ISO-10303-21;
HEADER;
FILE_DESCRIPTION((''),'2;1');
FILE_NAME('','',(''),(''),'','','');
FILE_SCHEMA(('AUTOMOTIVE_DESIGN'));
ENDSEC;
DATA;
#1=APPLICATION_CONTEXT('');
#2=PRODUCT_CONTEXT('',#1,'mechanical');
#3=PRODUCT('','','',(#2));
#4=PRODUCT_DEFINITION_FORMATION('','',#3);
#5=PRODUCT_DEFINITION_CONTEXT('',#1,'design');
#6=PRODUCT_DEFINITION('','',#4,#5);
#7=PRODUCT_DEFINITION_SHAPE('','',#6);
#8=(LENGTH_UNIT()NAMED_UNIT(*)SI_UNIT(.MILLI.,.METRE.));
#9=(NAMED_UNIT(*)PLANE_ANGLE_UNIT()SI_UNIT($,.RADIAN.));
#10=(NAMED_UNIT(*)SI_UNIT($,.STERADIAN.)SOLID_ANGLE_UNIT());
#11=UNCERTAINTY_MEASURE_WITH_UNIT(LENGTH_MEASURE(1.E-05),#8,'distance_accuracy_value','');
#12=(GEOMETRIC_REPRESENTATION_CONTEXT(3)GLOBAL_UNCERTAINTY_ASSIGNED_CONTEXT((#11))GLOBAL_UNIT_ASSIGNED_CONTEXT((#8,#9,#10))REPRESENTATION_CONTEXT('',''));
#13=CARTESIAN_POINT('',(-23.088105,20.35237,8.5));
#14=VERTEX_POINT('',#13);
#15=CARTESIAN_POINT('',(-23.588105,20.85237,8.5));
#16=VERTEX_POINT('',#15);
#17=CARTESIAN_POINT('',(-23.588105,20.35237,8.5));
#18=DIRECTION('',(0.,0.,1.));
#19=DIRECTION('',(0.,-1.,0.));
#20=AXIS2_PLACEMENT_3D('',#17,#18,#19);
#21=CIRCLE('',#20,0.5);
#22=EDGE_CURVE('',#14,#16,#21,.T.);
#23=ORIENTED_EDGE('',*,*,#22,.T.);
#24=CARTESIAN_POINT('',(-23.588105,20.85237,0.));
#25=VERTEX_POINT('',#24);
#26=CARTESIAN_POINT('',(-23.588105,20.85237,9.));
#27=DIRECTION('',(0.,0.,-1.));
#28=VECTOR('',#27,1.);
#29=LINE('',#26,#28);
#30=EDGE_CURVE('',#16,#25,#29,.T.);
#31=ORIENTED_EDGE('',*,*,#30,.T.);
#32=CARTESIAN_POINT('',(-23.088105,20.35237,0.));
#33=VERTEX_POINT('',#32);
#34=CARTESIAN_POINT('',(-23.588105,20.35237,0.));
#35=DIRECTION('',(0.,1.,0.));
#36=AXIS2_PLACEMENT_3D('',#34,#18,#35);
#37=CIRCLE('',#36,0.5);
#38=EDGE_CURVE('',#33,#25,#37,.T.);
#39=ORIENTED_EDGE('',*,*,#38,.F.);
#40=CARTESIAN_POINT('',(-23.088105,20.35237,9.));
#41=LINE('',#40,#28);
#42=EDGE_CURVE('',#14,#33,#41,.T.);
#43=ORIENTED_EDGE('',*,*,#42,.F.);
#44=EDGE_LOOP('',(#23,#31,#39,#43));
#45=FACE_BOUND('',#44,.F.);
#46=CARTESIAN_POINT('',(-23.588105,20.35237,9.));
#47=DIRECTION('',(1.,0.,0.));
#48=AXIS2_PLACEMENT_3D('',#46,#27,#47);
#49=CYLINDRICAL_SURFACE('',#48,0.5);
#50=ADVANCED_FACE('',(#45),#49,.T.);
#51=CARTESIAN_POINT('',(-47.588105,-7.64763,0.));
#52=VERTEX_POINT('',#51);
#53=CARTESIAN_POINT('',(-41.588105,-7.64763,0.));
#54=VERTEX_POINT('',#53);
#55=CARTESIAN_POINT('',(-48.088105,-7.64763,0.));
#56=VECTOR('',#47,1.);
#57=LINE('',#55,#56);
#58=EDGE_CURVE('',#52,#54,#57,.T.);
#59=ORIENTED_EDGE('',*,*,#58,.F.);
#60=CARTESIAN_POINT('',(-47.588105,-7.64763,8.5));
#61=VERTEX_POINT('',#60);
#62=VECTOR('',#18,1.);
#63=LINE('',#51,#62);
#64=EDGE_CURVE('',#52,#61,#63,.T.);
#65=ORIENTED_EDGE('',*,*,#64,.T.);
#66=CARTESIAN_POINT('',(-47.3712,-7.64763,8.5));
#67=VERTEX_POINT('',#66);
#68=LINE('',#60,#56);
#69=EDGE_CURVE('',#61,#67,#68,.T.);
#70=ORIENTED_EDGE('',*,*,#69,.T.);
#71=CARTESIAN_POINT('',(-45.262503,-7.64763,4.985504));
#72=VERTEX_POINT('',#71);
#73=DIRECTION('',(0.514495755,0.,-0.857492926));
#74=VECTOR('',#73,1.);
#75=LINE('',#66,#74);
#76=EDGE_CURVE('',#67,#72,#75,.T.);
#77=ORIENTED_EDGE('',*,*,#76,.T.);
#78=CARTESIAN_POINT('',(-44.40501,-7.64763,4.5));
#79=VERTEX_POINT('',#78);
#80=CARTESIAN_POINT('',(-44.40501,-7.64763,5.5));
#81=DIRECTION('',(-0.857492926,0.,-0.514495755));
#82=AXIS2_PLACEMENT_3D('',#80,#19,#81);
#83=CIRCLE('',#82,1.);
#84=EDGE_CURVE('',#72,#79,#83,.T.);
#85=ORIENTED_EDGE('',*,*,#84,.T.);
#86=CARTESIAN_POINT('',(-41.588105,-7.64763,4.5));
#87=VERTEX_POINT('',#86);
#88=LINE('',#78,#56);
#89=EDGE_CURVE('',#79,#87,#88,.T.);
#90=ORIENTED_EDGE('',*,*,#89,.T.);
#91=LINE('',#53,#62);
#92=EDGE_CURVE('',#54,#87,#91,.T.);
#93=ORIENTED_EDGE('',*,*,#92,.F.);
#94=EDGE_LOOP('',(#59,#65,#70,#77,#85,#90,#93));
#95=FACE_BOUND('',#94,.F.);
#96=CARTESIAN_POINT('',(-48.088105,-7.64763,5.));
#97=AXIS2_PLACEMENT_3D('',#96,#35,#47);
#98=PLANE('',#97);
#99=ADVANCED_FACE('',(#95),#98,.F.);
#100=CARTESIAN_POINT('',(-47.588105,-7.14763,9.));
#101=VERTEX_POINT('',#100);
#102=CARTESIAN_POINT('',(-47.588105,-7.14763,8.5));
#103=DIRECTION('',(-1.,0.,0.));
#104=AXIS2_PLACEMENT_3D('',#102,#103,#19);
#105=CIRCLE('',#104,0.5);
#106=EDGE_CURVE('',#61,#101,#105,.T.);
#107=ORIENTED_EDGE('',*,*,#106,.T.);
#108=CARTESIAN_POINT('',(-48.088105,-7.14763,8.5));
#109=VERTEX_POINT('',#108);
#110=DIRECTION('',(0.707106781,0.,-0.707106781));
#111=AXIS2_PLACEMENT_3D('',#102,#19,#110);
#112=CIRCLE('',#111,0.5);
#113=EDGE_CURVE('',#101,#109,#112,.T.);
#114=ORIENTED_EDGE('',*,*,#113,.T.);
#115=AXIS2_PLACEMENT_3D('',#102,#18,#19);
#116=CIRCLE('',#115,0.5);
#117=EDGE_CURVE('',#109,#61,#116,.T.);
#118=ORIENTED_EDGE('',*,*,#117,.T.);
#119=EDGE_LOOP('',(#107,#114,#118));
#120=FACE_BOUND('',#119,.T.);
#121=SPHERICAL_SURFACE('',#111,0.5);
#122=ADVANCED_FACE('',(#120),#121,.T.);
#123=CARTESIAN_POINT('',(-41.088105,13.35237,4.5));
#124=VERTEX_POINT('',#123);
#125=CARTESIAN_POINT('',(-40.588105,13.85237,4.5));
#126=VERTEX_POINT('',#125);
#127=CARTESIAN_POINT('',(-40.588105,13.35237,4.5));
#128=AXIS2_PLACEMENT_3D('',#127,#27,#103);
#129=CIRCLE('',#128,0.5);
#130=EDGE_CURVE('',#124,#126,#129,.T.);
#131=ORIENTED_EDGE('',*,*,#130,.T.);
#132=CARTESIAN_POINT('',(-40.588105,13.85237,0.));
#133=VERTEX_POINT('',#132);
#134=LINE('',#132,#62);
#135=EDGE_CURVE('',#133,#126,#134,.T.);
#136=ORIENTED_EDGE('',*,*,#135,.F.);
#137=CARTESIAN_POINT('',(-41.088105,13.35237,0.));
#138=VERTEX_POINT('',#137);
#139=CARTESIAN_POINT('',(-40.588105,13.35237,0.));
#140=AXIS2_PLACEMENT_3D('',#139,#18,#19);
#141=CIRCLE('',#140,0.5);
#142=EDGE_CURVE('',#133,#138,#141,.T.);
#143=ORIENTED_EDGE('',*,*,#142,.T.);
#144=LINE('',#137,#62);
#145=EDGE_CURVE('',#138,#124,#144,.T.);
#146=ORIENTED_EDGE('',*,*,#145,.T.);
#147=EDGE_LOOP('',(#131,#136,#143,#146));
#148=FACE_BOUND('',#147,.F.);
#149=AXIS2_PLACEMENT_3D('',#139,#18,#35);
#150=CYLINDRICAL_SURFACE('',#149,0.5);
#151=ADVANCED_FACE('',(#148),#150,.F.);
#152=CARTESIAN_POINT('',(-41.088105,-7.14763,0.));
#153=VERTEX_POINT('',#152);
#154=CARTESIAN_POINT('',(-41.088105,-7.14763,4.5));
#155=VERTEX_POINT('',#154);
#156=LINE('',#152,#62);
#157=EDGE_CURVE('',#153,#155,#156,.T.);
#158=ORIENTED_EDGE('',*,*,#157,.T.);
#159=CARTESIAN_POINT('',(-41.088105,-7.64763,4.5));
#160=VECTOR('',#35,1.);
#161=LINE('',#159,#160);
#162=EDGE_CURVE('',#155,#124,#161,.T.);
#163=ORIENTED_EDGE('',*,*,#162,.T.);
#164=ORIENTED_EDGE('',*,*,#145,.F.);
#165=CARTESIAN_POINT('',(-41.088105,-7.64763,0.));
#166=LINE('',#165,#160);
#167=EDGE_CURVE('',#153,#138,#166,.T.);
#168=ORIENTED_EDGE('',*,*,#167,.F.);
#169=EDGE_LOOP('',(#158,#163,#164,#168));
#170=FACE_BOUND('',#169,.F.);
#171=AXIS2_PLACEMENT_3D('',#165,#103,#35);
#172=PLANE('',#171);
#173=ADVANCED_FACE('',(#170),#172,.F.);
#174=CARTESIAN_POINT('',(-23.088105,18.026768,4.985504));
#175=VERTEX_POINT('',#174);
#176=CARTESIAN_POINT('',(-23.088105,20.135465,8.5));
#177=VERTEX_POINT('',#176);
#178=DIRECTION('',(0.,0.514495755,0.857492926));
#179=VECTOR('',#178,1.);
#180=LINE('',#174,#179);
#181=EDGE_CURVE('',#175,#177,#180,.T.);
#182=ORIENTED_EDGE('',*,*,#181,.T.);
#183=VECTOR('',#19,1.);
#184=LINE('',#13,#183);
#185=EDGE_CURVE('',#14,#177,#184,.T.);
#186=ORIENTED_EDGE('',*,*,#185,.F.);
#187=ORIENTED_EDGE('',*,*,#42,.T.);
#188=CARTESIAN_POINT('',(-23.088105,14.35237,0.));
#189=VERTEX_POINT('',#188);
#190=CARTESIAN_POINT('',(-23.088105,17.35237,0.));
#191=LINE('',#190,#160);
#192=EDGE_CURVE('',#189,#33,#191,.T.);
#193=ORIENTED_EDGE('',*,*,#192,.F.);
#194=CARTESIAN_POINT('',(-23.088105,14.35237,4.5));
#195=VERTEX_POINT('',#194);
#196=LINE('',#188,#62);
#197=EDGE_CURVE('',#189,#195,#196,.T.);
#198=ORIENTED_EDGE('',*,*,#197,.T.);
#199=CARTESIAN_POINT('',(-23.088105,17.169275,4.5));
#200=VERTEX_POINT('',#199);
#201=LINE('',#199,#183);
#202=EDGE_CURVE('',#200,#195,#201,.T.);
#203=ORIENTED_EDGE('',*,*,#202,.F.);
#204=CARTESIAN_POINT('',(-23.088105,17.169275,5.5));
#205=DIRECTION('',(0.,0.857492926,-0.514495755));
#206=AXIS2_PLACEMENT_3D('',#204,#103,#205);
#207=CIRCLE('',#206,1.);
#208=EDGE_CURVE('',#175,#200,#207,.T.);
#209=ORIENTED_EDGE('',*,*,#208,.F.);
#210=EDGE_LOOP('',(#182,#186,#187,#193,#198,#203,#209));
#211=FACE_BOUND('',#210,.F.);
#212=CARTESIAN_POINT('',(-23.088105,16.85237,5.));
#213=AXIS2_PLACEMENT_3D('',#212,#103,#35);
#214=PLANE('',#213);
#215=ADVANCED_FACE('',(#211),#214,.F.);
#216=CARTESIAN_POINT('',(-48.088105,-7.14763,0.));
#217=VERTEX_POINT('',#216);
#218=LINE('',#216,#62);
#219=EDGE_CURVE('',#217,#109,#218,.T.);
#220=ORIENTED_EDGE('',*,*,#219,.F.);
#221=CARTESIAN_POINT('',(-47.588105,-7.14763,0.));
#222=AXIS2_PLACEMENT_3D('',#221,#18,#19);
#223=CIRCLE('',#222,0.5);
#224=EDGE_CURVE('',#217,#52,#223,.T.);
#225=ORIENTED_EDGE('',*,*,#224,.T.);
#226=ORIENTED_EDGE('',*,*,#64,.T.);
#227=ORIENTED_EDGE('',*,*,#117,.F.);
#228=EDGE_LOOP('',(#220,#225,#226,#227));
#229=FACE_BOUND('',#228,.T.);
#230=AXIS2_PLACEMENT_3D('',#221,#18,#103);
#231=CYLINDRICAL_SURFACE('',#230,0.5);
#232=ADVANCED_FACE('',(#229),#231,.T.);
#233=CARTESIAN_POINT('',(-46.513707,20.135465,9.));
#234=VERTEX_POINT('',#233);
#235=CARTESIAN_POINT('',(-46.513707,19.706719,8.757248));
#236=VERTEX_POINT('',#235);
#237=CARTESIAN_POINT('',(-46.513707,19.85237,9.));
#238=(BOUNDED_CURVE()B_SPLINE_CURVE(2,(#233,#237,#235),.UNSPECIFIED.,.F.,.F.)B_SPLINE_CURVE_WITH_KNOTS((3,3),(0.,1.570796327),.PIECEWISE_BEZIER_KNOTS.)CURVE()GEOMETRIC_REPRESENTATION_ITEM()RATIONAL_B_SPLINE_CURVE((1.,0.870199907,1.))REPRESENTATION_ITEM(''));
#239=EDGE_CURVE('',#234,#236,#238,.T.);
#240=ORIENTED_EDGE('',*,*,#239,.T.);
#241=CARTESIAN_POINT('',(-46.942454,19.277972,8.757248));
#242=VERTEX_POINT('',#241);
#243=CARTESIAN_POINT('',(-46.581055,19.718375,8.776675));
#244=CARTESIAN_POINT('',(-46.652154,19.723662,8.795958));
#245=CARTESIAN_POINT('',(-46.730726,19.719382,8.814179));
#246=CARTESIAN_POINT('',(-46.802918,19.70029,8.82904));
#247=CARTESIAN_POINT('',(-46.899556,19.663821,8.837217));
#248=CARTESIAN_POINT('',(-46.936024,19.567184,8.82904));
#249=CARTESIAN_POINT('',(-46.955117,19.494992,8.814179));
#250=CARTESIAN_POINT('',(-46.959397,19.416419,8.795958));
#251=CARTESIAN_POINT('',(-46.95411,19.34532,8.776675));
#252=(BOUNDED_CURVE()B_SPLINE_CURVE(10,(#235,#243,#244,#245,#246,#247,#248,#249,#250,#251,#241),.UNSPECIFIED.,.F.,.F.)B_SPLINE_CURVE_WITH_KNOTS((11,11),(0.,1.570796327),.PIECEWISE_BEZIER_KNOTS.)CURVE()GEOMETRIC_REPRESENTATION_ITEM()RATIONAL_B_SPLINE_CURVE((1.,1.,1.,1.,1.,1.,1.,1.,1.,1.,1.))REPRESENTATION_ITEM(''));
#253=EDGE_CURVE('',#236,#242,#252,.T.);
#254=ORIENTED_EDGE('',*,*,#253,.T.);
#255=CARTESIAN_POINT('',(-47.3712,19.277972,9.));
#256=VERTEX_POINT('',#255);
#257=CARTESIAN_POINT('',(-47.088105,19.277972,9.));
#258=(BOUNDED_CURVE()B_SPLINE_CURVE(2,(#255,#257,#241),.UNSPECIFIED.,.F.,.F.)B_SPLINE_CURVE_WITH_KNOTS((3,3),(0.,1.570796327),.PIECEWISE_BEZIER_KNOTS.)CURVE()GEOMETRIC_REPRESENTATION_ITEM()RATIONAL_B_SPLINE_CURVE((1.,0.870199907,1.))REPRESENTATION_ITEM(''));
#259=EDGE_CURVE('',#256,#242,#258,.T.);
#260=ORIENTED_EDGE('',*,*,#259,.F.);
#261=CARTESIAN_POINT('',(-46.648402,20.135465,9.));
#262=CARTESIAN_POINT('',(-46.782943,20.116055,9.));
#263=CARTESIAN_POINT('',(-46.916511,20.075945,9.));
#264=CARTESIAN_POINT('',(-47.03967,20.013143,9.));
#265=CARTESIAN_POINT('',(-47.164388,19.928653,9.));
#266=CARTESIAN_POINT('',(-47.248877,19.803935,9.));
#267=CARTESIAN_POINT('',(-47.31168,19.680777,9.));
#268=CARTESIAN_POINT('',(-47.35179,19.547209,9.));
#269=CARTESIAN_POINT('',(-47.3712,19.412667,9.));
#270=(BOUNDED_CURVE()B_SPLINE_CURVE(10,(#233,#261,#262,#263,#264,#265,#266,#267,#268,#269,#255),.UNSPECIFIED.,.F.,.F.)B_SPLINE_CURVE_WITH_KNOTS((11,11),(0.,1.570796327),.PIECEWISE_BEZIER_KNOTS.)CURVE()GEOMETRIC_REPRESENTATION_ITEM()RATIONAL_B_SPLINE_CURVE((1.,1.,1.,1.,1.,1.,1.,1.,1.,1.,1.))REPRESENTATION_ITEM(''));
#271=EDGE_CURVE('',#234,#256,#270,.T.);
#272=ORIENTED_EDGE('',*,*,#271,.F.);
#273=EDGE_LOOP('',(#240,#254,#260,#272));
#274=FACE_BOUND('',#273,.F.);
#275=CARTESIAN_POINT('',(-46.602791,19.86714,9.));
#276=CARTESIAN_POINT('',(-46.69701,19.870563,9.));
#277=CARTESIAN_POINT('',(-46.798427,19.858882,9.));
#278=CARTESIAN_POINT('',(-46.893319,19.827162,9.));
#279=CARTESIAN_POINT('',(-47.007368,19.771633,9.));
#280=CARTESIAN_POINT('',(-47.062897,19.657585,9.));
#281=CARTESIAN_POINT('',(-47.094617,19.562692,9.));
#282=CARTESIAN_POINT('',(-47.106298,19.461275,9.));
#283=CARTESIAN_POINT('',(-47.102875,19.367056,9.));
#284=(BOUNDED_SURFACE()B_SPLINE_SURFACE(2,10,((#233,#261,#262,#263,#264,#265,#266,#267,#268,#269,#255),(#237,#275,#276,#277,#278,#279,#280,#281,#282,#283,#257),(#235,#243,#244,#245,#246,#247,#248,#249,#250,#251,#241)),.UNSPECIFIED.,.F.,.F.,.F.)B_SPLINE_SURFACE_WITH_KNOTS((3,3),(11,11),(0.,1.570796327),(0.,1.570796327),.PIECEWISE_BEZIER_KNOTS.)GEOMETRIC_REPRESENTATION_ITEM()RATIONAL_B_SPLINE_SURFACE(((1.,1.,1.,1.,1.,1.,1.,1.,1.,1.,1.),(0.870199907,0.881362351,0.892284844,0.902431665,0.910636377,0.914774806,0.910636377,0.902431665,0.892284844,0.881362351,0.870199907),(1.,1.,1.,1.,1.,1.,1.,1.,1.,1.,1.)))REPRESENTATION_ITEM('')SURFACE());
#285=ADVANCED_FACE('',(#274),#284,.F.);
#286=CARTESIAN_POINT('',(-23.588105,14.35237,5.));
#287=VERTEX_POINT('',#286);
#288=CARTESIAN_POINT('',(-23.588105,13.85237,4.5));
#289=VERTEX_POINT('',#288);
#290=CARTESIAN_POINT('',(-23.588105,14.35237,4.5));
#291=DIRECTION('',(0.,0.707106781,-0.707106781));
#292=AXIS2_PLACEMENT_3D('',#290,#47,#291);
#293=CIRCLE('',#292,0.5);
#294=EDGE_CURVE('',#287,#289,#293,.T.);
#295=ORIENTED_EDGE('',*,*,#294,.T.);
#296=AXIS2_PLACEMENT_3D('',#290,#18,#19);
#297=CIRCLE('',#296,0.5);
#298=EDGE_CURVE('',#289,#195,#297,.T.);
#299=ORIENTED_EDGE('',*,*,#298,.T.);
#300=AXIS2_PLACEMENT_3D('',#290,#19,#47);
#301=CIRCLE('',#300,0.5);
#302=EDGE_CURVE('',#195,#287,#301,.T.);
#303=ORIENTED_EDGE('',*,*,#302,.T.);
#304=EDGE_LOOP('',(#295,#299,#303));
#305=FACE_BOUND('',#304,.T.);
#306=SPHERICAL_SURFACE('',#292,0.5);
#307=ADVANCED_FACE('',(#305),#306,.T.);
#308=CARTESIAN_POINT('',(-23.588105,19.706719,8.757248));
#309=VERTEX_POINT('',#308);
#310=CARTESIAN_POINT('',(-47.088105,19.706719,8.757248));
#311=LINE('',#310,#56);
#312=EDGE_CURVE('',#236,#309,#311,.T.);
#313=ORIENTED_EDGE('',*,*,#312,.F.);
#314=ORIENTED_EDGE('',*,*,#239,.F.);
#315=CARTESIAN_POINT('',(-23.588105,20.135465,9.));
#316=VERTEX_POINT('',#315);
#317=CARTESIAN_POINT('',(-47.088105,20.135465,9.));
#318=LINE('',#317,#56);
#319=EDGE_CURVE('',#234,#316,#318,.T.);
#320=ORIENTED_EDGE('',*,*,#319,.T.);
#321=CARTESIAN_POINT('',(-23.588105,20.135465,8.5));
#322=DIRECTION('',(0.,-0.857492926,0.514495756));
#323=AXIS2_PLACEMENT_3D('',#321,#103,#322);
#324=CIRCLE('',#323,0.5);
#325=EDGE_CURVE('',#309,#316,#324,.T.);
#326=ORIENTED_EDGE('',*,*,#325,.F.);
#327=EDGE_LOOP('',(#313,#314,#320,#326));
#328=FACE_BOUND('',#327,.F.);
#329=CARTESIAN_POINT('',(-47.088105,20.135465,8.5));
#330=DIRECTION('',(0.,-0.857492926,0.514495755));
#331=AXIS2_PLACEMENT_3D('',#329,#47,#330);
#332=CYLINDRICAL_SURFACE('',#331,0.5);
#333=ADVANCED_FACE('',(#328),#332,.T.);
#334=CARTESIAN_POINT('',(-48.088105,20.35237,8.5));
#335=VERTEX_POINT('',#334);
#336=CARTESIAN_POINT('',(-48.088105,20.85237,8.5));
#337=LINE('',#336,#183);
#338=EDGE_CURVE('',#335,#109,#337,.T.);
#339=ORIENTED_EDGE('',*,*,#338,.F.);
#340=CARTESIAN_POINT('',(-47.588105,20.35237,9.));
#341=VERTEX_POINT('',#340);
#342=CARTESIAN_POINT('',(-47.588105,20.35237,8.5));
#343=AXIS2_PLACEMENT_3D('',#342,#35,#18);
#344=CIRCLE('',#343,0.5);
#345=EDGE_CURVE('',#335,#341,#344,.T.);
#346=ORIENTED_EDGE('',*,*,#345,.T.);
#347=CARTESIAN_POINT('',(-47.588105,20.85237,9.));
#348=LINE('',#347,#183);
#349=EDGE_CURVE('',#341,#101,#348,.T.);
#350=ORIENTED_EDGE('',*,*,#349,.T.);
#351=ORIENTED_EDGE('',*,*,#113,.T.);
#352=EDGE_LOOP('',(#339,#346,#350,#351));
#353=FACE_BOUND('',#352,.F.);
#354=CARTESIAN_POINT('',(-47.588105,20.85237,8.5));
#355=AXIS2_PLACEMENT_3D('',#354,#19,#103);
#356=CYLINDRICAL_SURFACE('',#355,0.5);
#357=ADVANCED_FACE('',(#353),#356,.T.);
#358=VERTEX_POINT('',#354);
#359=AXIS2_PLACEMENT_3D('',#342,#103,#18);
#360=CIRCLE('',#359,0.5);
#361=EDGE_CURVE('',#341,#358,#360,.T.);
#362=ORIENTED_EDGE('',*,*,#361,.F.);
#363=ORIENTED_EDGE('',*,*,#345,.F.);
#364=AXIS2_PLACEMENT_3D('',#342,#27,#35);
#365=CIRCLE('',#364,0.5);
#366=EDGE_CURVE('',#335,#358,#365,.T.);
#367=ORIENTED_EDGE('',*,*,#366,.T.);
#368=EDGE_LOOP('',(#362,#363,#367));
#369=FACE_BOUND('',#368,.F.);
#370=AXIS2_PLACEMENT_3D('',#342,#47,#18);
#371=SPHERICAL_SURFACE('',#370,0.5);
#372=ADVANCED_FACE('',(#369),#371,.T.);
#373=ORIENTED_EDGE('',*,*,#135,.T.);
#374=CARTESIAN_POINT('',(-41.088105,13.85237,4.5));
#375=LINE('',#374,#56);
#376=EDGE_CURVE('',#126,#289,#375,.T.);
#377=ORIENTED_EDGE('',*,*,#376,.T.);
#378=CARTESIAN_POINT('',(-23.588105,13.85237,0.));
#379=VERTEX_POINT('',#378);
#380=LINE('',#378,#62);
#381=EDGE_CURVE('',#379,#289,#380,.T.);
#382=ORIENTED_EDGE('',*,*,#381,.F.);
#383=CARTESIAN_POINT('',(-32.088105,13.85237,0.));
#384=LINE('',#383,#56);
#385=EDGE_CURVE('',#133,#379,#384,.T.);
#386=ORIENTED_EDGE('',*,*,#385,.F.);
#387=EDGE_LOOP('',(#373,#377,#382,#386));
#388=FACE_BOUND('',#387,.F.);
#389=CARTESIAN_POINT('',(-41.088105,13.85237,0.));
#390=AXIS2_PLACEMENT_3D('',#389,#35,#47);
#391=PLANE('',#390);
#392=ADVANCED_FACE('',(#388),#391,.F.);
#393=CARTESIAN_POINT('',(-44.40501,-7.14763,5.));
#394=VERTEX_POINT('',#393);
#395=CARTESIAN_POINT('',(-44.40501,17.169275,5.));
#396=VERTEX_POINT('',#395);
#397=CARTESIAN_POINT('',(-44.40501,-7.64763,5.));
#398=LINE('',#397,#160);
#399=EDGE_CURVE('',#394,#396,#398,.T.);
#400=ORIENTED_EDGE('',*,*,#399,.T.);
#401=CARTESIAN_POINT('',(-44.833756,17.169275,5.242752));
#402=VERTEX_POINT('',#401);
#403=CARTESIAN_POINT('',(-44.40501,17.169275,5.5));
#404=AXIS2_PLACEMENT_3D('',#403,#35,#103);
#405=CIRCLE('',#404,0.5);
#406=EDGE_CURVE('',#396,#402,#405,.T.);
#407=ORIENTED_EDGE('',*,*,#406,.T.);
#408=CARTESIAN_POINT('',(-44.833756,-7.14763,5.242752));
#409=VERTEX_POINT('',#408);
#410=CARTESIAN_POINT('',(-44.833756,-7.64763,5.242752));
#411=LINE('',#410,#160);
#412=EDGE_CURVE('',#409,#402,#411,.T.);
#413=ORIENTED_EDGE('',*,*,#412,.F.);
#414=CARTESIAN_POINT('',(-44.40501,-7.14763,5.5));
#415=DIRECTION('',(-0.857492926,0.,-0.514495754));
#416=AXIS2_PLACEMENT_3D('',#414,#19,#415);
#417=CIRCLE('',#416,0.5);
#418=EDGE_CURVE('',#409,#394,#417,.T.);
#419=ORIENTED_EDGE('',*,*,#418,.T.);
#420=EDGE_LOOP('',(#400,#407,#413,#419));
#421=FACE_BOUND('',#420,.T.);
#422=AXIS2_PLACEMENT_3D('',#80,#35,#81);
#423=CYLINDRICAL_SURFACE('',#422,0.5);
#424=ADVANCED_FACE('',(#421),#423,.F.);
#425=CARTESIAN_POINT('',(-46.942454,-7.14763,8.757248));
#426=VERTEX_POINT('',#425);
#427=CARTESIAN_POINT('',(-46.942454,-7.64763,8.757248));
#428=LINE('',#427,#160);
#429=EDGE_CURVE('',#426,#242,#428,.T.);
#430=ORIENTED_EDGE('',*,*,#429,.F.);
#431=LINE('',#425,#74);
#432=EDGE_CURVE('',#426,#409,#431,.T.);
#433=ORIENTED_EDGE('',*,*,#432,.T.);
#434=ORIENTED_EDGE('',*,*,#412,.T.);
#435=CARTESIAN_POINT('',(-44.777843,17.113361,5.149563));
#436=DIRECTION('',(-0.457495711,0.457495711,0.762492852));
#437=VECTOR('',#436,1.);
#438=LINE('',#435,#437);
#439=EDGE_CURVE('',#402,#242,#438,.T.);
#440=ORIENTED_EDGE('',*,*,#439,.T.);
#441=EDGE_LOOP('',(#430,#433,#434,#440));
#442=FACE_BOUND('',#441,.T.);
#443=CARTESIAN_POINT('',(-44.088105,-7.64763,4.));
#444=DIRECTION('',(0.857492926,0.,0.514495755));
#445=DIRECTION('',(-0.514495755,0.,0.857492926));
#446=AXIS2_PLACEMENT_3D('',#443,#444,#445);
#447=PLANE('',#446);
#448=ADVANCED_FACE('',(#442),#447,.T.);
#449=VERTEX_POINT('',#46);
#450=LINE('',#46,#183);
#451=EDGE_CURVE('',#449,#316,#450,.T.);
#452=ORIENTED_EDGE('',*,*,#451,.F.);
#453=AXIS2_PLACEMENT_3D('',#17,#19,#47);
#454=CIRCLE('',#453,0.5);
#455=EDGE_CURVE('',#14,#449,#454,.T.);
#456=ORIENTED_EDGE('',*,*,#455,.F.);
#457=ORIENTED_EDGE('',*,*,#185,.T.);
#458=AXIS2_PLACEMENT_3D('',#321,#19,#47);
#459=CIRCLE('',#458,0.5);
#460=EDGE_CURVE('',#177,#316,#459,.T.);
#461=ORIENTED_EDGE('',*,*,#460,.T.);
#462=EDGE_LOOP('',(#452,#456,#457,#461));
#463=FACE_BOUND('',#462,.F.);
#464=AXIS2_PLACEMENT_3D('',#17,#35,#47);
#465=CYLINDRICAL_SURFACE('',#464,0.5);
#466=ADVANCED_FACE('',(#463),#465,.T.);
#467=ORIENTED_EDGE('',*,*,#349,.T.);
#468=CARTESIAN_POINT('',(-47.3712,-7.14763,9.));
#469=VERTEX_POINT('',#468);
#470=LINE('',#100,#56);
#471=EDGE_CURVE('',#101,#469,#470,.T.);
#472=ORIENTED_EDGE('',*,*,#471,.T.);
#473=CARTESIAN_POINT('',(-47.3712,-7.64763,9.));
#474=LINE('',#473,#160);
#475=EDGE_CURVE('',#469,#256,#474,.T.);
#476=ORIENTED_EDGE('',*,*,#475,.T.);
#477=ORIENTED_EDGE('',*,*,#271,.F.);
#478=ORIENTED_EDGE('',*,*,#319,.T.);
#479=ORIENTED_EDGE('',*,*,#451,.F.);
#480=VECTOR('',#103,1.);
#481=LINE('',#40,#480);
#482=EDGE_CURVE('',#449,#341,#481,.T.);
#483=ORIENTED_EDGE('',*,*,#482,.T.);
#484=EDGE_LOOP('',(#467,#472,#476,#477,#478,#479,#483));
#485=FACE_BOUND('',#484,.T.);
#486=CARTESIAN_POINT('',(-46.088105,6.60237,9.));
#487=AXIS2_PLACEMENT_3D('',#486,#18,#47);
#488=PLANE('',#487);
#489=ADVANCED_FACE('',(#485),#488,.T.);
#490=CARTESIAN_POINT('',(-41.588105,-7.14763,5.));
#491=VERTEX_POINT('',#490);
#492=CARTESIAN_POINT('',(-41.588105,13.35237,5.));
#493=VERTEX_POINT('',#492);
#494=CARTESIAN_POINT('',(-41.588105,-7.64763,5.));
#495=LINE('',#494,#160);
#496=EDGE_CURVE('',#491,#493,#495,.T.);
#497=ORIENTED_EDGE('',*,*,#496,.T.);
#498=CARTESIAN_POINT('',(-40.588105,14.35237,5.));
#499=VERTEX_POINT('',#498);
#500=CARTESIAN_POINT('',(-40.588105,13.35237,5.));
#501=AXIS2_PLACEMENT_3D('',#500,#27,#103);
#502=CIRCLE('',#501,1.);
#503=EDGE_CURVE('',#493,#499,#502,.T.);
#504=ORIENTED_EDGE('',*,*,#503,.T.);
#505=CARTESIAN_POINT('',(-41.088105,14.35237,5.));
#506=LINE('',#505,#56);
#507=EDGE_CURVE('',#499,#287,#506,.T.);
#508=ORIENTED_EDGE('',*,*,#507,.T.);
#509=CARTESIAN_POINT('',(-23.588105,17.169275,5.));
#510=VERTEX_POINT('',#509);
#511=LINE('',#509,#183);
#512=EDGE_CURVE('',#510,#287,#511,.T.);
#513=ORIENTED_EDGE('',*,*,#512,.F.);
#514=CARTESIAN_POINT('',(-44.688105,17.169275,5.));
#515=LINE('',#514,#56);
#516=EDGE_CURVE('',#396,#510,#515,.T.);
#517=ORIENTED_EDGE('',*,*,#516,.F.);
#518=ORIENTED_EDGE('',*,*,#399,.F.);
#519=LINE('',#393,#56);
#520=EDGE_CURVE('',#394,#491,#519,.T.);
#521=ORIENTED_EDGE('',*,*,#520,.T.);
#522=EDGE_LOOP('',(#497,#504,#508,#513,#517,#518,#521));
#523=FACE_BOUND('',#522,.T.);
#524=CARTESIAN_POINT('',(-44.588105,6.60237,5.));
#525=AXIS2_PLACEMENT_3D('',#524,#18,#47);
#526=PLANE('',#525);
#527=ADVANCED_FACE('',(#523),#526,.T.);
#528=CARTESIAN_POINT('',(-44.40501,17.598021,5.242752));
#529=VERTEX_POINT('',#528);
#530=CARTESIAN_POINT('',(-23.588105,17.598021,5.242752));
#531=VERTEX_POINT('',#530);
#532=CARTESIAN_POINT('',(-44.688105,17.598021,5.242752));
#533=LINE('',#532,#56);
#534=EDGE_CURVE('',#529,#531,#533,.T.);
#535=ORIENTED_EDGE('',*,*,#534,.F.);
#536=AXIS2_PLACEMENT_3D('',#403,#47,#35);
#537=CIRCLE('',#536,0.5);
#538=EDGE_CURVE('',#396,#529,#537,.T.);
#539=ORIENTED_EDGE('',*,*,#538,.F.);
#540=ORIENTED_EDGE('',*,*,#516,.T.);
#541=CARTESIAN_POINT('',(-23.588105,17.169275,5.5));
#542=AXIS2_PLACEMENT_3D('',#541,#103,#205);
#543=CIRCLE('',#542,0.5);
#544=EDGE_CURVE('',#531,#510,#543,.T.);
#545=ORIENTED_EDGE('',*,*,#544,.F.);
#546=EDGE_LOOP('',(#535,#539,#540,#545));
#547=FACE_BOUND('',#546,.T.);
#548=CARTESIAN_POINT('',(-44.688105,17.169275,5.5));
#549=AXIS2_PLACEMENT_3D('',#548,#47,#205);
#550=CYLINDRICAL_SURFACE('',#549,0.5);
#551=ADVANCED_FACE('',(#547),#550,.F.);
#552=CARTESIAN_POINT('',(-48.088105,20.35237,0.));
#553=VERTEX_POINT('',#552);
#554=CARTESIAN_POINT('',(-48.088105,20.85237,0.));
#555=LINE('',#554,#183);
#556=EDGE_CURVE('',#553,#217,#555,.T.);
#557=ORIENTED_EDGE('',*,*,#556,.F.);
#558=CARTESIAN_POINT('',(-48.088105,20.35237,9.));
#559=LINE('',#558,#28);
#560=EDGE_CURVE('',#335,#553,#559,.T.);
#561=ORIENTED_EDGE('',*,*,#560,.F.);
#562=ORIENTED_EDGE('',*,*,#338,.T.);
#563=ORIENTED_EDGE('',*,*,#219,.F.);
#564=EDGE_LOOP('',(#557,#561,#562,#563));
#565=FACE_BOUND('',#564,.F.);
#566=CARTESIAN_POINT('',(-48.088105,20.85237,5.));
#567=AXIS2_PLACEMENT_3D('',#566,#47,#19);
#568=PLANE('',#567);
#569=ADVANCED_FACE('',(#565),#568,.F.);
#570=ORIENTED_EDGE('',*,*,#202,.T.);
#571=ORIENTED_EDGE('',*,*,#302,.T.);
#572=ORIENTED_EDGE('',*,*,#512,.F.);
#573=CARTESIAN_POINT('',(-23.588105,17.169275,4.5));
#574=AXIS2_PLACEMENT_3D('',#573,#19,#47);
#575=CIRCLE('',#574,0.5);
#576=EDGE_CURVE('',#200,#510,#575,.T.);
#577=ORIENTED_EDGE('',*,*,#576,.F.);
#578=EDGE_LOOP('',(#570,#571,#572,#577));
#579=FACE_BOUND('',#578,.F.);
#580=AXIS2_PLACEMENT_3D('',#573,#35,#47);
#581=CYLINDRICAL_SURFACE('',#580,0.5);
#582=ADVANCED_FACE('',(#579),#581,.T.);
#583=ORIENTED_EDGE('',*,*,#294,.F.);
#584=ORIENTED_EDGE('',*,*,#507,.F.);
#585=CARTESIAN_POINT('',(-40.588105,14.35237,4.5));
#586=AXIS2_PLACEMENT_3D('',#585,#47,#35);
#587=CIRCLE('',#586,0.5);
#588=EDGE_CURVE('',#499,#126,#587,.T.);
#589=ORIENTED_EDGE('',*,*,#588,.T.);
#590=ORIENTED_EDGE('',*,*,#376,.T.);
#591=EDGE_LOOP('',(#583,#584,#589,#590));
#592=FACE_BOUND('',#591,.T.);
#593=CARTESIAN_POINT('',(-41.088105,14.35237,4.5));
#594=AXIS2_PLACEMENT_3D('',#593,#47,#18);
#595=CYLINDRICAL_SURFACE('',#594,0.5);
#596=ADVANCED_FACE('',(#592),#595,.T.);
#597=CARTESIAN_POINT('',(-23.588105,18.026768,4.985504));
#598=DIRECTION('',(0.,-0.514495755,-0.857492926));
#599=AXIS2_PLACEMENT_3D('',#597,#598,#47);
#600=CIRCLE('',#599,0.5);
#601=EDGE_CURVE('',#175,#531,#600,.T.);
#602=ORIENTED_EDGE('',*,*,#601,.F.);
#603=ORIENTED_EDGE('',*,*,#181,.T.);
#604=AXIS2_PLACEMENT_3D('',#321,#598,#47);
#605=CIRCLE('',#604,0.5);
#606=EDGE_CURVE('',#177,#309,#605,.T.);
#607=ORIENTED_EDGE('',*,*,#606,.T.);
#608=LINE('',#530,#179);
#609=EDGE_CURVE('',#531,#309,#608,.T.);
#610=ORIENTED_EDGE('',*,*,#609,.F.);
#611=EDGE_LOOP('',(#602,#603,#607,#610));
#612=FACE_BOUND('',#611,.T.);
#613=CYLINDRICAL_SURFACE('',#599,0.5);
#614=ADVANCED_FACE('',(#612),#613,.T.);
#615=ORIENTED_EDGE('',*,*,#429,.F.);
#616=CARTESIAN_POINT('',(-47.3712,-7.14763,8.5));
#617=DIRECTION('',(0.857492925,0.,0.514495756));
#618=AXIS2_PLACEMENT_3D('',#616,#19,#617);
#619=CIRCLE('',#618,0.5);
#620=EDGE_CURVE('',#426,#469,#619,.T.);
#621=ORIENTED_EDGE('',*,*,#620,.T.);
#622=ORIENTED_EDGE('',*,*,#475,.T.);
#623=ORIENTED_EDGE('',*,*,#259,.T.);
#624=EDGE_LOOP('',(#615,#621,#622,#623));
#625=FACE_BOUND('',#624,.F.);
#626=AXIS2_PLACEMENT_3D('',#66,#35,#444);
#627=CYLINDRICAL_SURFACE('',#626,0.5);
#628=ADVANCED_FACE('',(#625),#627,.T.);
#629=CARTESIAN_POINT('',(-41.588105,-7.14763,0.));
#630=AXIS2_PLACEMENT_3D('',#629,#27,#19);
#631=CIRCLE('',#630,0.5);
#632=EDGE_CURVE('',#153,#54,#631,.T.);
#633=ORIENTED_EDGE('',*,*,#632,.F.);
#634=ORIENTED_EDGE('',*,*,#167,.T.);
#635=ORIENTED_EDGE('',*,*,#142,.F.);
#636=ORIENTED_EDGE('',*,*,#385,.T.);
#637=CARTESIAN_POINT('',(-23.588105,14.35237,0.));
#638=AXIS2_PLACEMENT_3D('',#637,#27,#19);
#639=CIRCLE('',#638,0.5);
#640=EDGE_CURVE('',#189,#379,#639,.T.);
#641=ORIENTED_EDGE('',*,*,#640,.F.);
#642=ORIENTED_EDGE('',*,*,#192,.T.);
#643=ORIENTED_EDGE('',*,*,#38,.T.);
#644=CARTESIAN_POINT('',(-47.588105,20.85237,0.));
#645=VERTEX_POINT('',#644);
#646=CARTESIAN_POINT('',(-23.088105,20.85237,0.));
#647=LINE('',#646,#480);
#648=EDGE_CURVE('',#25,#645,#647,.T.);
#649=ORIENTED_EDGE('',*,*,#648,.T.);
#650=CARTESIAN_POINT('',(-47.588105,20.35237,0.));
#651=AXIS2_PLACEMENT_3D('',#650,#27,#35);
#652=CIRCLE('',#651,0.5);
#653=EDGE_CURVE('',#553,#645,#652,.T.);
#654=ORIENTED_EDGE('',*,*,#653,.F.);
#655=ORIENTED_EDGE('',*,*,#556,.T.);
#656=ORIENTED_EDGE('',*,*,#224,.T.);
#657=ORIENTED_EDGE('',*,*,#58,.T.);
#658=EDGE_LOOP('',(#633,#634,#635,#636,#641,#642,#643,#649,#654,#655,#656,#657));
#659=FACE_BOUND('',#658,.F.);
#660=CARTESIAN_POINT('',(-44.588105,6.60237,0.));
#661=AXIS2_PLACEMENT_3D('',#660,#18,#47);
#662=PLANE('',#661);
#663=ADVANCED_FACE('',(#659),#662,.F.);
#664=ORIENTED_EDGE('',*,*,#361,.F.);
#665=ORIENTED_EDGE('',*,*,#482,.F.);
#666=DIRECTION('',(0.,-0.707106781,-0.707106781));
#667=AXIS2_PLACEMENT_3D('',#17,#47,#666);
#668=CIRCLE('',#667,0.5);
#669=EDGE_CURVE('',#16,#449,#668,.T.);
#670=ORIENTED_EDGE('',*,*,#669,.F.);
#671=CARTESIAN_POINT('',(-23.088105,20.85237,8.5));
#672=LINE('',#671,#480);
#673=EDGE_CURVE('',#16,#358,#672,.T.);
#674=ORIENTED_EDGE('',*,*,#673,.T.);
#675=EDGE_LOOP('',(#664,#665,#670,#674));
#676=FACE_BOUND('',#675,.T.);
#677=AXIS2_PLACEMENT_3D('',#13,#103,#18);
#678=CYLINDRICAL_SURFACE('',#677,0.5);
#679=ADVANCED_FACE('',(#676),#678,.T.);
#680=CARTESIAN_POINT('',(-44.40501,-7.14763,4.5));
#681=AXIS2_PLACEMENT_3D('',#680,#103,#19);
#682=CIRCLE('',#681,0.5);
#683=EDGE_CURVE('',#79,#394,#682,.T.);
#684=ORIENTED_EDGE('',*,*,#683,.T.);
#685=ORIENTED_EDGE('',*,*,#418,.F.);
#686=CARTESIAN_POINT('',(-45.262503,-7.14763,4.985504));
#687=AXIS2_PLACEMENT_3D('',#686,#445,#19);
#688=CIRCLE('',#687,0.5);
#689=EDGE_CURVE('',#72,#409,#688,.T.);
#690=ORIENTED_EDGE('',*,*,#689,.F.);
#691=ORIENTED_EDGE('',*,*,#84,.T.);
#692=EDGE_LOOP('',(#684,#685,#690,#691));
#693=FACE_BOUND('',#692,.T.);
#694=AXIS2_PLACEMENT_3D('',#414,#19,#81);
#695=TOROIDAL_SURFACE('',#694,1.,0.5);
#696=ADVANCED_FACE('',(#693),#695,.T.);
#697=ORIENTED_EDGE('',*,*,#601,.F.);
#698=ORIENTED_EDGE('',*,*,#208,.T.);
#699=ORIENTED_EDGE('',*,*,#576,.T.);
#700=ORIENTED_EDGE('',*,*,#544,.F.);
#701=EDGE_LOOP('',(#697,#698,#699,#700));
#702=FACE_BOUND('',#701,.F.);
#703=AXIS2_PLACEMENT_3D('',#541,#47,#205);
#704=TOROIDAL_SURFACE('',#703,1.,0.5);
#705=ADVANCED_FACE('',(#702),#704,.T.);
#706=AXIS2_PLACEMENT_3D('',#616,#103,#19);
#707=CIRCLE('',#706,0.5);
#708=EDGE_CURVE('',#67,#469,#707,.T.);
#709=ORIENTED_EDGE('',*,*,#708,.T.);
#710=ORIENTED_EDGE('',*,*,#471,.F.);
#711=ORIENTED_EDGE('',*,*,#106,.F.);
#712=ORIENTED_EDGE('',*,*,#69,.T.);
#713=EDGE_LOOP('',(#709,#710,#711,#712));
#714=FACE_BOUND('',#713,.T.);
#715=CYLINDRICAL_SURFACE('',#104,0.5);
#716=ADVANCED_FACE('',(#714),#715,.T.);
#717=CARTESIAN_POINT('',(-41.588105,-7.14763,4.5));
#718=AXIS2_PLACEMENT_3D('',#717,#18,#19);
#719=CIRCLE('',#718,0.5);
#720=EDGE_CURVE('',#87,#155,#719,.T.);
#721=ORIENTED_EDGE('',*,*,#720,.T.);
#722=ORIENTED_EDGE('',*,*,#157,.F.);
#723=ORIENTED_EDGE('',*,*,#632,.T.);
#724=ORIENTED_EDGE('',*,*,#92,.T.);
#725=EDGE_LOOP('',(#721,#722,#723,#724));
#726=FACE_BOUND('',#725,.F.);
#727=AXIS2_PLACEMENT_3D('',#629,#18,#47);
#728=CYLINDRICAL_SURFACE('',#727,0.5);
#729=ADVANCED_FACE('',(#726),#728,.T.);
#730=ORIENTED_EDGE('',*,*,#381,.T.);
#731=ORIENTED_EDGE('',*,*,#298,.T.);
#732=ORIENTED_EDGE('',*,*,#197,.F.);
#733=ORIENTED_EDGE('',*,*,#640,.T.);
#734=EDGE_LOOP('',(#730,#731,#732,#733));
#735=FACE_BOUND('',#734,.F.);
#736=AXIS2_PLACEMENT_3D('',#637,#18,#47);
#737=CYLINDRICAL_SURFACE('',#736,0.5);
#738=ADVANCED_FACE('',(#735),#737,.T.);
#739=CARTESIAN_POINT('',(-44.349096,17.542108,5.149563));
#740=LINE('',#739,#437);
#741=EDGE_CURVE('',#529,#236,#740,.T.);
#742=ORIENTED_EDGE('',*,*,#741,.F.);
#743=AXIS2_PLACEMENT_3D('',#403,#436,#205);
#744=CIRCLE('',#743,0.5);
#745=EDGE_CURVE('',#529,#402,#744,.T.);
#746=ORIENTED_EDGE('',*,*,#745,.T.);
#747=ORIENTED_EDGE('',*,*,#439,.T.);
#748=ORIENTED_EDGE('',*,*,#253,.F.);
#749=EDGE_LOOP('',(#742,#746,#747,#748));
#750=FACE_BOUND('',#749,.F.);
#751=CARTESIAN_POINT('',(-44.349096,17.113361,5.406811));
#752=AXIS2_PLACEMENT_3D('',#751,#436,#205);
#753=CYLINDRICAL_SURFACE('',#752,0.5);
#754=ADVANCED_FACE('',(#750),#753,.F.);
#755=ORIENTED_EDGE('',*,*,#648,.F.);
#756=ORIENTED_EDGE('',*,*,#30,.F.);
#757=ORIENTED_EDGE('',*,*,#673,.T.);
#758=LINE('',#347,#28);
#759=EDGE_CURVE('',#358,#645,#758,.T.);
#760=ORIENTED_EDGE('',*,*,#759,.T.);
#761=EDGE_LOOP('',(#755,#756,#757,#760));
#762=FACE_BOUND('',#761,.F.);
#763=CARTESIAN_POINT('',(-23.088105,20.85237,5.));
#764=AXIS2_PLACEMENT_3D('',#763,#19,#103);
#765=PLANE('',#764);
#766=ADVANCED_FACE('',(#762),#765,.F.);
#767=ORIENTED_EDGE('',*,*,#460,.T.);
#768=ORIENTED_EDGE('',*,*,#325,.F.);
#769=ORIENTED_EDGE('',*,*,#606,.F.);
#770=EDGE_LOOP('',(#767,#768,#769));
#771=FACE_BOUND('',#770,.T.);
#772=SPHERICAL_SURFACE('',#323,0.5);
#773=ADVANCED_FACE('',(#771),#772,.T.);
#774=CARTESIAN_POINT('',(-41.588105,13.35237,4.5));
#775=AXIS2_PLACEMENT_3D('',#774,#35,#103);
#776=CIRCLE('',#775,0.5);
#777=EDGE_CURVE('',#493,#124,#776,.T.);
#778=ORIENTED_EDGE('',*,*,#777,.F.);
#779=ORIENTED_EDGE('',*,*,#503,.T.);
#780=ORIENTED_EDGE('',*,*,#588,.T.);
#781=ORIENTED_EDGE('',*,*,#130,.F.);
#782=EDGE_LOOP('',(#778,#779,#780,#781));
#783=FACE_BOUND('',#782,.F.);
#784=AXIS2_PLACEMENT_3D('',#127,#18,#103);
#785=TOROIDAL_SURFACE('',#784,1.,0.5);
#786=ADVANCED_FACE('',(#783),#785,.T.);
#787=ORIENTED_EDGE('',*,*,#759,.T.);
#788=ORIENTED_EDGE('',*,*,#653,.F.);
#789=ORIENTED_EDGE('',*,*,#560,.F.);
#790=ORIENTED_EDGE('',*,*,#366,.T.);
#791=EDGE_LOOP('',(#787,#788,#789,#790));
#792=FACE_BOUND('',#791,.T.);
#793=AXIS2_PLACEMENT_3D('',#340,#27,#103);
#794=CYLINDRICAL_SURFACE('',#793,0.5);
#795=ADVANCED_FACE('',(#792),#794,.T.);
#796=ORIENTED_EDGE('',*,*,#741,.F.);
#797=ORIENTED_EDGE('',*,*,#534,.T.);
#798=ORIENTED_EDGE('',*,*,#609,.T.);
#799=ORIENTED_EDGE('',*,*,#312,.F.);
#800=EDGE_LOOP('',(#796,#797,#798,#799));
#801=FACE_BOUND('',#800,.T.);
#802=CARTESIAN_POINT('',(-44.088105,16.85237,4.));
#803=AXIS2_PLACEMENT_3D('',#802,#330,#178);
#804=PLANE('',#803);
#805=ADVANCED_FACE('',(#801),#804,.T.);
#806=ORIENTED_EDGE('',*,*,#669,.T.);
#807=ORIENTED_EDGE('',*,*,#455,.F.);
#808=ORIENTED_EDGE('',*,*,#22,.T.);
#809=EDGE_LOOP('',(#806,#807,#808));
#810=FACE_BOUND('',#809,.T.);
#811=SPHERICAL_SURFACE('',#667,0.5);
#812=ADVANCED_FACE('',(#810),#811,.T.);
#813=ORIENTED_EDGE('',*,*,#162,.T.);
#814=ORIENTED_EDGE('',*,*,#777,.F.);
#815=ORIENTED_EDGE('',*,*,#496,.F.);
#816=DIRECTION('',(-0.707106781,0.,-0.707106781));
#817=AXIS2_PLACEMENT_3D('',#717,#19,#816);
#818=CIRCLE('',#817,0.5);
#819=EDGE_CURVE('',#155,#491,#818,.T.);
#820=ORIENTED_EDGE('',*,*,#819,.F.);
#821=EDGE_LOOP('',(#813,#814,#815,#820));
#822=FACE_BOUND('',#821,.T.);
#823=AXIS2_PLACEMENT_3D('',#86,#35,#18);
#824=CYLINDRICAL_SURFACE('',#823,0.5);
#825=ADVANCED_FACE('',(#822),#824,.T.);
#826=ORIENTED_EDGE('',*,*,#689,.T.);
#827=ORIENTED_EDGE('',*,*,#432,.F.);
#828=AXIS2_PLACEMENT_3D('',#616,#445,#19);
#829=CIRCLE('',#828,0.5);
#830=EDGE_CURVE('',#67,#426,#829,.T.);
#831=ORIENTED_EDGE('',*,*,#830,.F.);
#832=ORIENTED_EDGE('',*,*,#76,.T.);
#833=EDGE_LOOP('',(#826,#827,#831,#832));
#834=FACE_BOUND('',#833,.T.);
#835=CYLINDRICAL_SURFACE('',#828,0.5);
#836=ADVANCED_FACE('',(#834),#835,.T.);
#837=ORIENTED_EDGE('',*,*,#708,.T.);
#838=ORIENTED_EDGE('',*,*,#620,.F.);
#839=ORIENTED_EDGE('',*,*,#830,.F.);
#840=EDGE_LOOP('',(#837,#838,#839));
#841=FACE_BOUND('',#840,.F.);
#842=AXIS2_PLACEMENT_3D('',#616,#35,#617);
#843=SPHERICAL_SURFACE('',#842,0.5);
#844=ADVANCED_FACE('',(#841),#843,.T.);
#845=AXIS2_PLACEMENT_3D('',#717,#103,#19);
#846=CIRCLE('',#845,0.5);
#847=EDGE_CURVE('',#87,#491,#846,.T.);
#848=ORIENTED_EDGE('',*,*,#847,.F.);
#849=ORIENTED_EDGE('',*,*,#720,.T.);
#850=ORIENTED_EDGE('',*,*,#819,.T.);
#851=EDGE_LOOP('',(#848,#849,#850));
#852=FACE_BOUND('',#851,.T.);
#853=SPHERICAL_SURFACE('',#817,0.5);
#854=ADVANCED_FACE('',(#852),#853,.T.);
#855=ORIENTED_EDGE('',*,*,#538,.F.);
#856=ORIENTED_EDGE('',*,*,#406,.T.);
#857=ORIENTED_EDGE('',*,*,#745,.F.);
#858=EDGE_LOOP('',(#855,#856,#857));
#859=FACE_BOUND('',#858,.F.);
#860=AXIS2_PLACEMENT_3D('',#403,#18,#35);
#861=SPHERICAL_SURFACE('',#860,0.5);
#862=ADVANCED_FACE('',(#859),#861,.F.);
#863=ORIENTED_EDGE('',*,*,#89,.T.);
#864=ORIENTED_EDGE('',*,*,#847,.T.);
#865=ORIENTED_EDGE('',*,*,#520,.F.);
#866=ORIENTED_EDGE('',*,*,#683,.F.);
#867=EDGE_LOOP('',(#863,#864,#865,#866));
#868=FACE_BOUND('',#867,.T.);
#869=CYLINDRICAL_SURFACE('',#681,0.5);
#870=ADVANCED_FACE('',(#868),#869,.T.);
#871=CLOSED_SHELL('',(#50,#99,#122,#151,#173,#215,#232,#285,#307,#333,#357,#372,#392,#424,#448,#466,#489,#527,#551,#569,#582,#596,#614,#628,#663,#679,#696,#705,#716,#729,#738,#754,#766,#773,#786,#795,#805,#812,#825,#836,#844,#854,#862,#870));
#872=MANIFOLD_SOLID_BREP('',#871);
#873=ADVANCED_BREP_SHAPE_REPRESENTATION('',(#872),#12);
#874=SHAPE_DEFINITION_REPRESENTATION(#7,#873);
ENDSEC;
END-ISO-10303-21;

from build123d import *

# Parameters (mm, degrees)
F0_W         = 18
F0_H         = 7
F1_DEPTH     = 5
F2_W         = 21
F2_H         = 4
F3_DEPTH     = 4
F4_T4_DEPTH  = 37.431305486
F4_T9_DEPTH  = 33.931305486
F4_T15_DEPTH = 33.931305486
F4_T21_DEPTH = 37.431305486
F5_R         = 0.5
F6_T1_DEPTH  = 2.8169048105
F6_T3_DEPTH  = 2.8169048105
F6_T5_DEPTH  = 0.2169048105
F6_T7_DEPTH  = 4.0985711369
F6_T9_DEPTH  = 0.2169048105
F6_T11_DEPTH = 4.0985711369
F6_S15_W     = 0.5
F6_S15_H     = 0.5
F6_T16_DEPTH = 0.5
F6_S21_W     = 0.5
F6_S21_H     = 0.5
F6_T22_DEPTH = 0.5
F6_S27_W     = 0.5
F6_S27_H     = 0.5
F6_T28_DEPTH = 0.5
F6_S33_W     = 0.5
F6_S33_H     = 0.5
F6_T34_DEPTH = 0.5
F6_T38_ANGLE = 59.0362434679
F6_T40_ANGLE = 59.0362434679
F6_T42_ANGLE = 59.0362434679
F6_T44_ANGLE = 59.0362434679


# Not quite as in the source:
# - a fillet or chamfer that OpenCascade refuses, or shapes differently, is made with other operations: its cross-section is extruded or revolved along the edge and cut away or added


with BuildPart() as f1:
    # F0 (on Top) → F1 (new body)
    with BuildSketch(Plane.XY):
        Polygon((-41.0881050097, 20.8523701802), (-48.0881050097, 20.8523701802), (-48.0881050097, -7.6476298198), (-41.0881050097, -7.6476298198), (-41.0881050097, 13.8523701802), align=None)
        with Locations((-32.0881050097, 17.3523701802)):
            Rectangle(F0_W, F0_H)
    extrude(amount=F1_DEPTH)

    # F2 (on face) → F3 (join)
    with BuildSketch(Plane.XY.offset(5)):
        Polygon((-44.0881050097, 20.8523701802), (-48.0881050097, 20.8523701802), (-48.0881050097, -7.6476298198), (-44.0881050097, -7.6476298198), (-44.0881050097, 16.8523701802), align=None)
        with Locations((-33.5881050097, 18.8523701802)):
            Rectangle(F2_W, F2_H)
    extrude(amount=F3_DEPTH)

    # F4: chamfer of 5 x 3 on 2 edges, made by hand


with BuildPart() as f4_tool2:
    # F4_s3 → F4_t4 (new body)
    with BuildSketch(Plane.XZ.offset(20.5789353058)):
        Polygon((-44.0881050097, 4), (-47.0881050097, 9), (-44.0881050097, 9), align=None)
    extrude(amount=-F4_T4_DEPTH)

    split(bisect_by=Plane.XY.offset(5), keep=Keep.TOP)


with BuildPart() as f1_1:
    add(f1.part)

    # F4_t1: cut F4_tool2
    add(f4_tool2.part, mode=Mode.SUBTRACT)


with BuildPart() as f4_tool7:
    # F4_s8 → F4_t9 (new body)
    with BuildSketch(Plane.YZ.offset(-44.0881050097)):
        Polygon((16.8523701802, 4), (19.8523701802, 9), (16.8523701802, 9), align=None)
    extrude(amount=F4_T9_DEPTH)

    split(bisect_by=Plane.XY.offset(5), keep=Keep.TOP)


with BuildPart() as f1_2:
    add(f1_1.part)

    # F4_t6: cut F4_tool7
    add(f4_tool7.part, mode=Mode.SUBTRACT)


with BuildPart() as f4_tool13:
    # F4_s14 → F4_t15 (new body)
    with BuildSketch(Plane.YZ.offset(-57.0194104957)):
        Polygon((16.8523701802, 4), (19.8523701802, 9), (16.8523701802, 9), align=None)
    extrude(amount=F4_T15_DEPTH)

    split(bisect_by=Plane.YZ.offset(-48.0881050097), keep=Keep.TOP)

    split(bisect_by=Plane.YZ.offset(-44.0881050097), keep=Keep.BOTTOM)

    split(bisect_by=Plane.XY.offset(5), keep=Keep.TOP)


with BuildPart() as f4_tool19:
    # F4_s20 → F4_t21 (new body)
    with BuildSketch(Plane.XZ.offset(7.6476298198)):
        Polygon((-44.0881050097, 4), (-47.0881050097, 9), (-44.0881050097, 9), align=None)
    extrude(amount=-F4_T21_DEPTH)

    split(bisect_by=Plane.XZ.offset(-16.8523701802), keep=Keep.BOTTOM)

    split(bisect_by=Plane.XY.offset(5), keep=Keep.TOP)

    split(bisect_by=Plane.XZ.offset(-20.8523701802), keep=Keep.TOP)


with BuildPart() as f4_tool13_1:
    add(f4_tool13.part)

    # F4_t25: intersect F4_tool19
    add(f4_tool19.part, mode=Mode.INTERSECT)


with BuildPart() as f1_3:
    add(f1_2.part)

    # F4_t11: cut F4_tool13
    add(f4_tool13_1.part, mode=Mode.SUBTRACT)

    # F5
    f5_edges = [f1_3.edges().sort_by_distance(p)[0] for p in [
        (-48.088105, -7.64763, 4.5),
        (-41.088105, -7.64763, 2.5),
        (-41.088105, 13.85237, 2.5),
        (-23.088105, 13.85237, 2.5),
        (-23.088105, 20.85237, 4.5),
        (-35.588105, 20.85237, 9),
        (-35.088105, 19.85237, 9),
        (-47.088105, 6.10237, 9),
        (-45.888105, 18.65237, 7),
        (-33.888105, 17.45237, 5),
        (-44.688105, 4.90237, 5),
        (-41.088105, 3.10237, 5),
        (-32.088105, 13.85237, 5),
        (-48.088105, 6.60237, 9),
        (-48.088105, 20.85237, 4.5),
    ]]
    fillet(f5_edges, radius=F5_R)

    # F6: fillet of radius 0.5 on 10 edges, made by hand

    # F6_s2 → F6_t1 (cut)
    with BuildSketch(Plane.YZ.offset(-44.4050098202)):
        with BuildLine():
            ThreePointArc((-7.6476298198, 4.5), (-7.5011832104, 4.8535533906), (-7.1476298198, 5))
            Line((-7.1476298198, 5), (-7.6476298198, 5))
            Line((-7.6476298198, 5), (-7.6476298198, 4.5))
        make_face()
    extrude(amount=F6_T1_DEPTH, mode=Mode.SUBTRACT)

    # F6_s4 → F6_t3 (cut)
    with BuildSketch(Plane.XZ.offset(-17.1692749907)):
        with BuildLine():
            ThreePointArc((-23.0881050097, 4.5), (-23.2345516191, 4.8535533906), (-23.5881050097, 5))
            Line((-23.5881050097, 5), (-23.0881050097, 5))
            Line((-23.0881050097, 5), (-23.0881050097, 4.5))
        make_face()
    extrude(amount=F6_T3_DEPTH, mode=Mode.SUBTRACT)

    # F6_s6 → F6_t5 (cut)
    with BuildSketch(Plane.YZ.offset(-47.5881050097)):
        with BuildLine():
            ThreePointArc((-7.6476298198, 8.5), (-7.5011832104, 8.8535533906), (-7.1476298198, 9))
            Line((-7.1476298198, 9), (-7.6476298198, 9))
            Line((-7.6476298198, 9), (-7.6476298198, 8.5))
        make_face()
    extrude(amount=F6_T5_DEPTH, mode=Mode.SUBTRACT)

    # F6_s8 → F6_t7 (cut)
    with BuildSketch(Plane(origin=(-16.2894353468, 0, 27.1490589114), x_dir=(0, 1, 0), z_dir=(0.5144957554, 0, -0.8574929257))):
        with BuildLine():
            ThreePointArc((-7.6476298198, -36.2472551322), (-7.5011832104, -35.8937017416), (-7.1476298198, -35.7472551322))
            Line((-7.1476298198, -35.7472551322), (-7.6476298198, -35.7472551322))
            Line((-7.6476298198, -35.7472551322), (-7.6476298198, -36.2472551322))
        make_face()
    extrude(amount=F6_T7_DEPTH, mode=Mode.SUBTRACT)

    # F6_s10 → F6_t9 (cut)
    with BuildSketch(Plane.XZ.offset(-20.3523701802)):
        with BuildLine():
            ThreePointArc((-23.0881050097, 8.5), (-23.2345516191, 8.8535533906), (-23.5881050097, 9))
            Line((-23.5881050097, 9), (-23.0881050097, 9))
            Line((-23.0881050097, 9), (-23.0881050097, 8.5))
        make_face()
    extrude(amount=F6_T9_DEPTH, mode=Mode.SUBTRACT)

    # F6_s12 → F6_t11 (cut)
    with BuildSketch(Plane(origin=(0, 6.971278674, 11.61879779), x_dir=(1, 0, 0), z_dir=(0, 0.5144957554, 0.8574929257))):
        with BuildLine():
            ThreePointArc((-23.0881050097, 12.8928051893), (-23.2345516191, 12.5392517987), (-23.5881050097, 12.3928051893))
            Line((-23.5881050097, 12.3928051893), (-23.0881050097, 12.3928051893))
            Line((-23.0881050097, 12.3928051893), (-23.0881050097, 12.8928051893))
        make_face()
    extrude(amount=F6_T11_DEPTH, mode=Mode.SUBTRACT)


with BuildPart() as f6_tool14:
    # F6_s15 → F6_t16 (new body)
    with BuildSketch(Plane.YZ.offset(-23.5881050097)):
        with Locations((20.6023701802, 8.75)):
            Rectangle(F6_S15_W, F6_S15_H)
    extrude(amount=F6_T16_DEPTH)

    # F6_s17 → F6_t18 (revolve, cut)
    with BuildSketch(Plane(origin=(-23.5881050097, 20.3523701802, 8.5), x_dir=(0, -0.7071067812, -0.7071067812), z_dir=(0, -0.7071067812, 0.7071067812))):
        with BuildLine():
            ThreePointArc((0, -0.5), (0.5, 0), (0, 0.5))
            Line((0, 0.5), (0, -0.5))
        make_face()
    revolve(axis=Axis((-23.5881050097, 20.3523701802, 8.5), (1, 0, 0)), mode=Mode.SUBTRACT)


with BuildPart() as f1_4:
    add(f1_3.part)

    # F6_t13: cut F6_tool14
    add(f6_tool14.part, mode=Mode.SUBTRACT)


with BuildPart() as f6_tool20:
    # F6_s21 → F6_t22 (new body)
    with BuildSketch(Plane.XZ.offset(7.1476298198)):
        with Locations((-47.8381050097, 8.75)):
            Rectangle(F6_S21_W, F6_S21_H)
    extrude(amount=F6_T22_DEPTH)

    # F6_s23 → F6_t24 (revolve, cut)
    with BuildSketch(Plane(origin=(-47.5881050097, -7.1476298198, 8.5), x_dir=(0.7071067812, 0, -0.7071067812), z_dir=(-0.7071067812, 0, -0.7071067812))):
        with BuildLine():
            ThreePointArc((0, -0.5), (0.5, 0), (0, 0.5))
            Line((0, 0.5), (0, -0.5))
        make_face()
    revolve(axis=Axis((-47.5881050097, -7.1476298198, 8.5), (0, -1, 0)), mode=Mode.SUBTRACT)


with BuildPart() as f1_5:
    add(f1_4.part)

    # F6_t19: cut F6_tool20
    add(f6_tool20.part, mode=Mode.SUBTRACT)


with BuildPart() as f6_tool26:
    # F6_s27 → F6_t28 (new body)
    with BuildSketch(Plane.YZ.offset(-23.5881050097)):
        with Locations((14.1023701802, 4.75)):
            Rectangle(F6_S27_W, F6_S27_H)
    extrude(amount=F6_T28_DEPTH)

    # F6_s29 → F6_t30 (revolve, cut)
    with BuildSketch(Plane(origin=(-23.5881050097, 14.3523701802, 4.5), x_dir=(0, 0.7071067812, -0.7071067812), z_dir=(0, -0.7071067812, -0.7071067812))):
        with BuildLine():
            ThreePointArc((0, -0.5), (0.5, 0), (0, 0.5))
            Line((0, 0.5), (0, -0.5))
        make_face()
    revolve(axis=Axis((-23.5881050097, 14.3523701802, 4.5), (1, 0, 0)), mode=Mode.SUBTRACT)


with BuildPart() as f1_6:
    add(f1_5.part)

    # F6_t25: cut F6_tool26
    add(f6_tool26.part, mode=Mode.SUBTRACT)


with BuildPart() as f6_tool32:
    # F6_s33 → F6_t34 (new body)
    with BuildSketch(Plane.XZ.offset(7.1476298198)):
        with Locations((-41.3381050097, 4.75)):
            Rectangle(F6_S33_W, F6_S33_H)
    extrude(amount=F6_T34_DEPTH)

    # F6_s35 → F6_t36 (revolve, cut)
    with BuildSketch(Plane(origin=(-41.5881050097, -7.1476298198, 4.5), x_dir=(-0.7071067812, 0, -0.7071067812), z_dir=(-0.7071067812, 0, 0.7071067812))):
        with BuildLine():
            ThreePointArc((0, -0.5), (0.5, 0), (0, 0.5))
            Line((0, 0.5), (0, -0.5))
        make_face()
    revolve(axis=Axis((-41.5881050097, -7.1476298198, 4.5), (0, -1, 0)), mode=Mode.SUBTRACT)


with BuildPart() as f1_7:
    add(f1_6.part)

    # F6_t31: cut F6_tool32
    add(f6_tool32.part, mode=Mode.SUBTRACT)

    # F6_s37 → F6_t38 (revolve, cut)
    with BuildSketch(Plane(origin=(-16.2894353468, 0, 27.1490589114), x_dir=(0, 1, 0), z_dir=(0.5144957554, 0, -0.8574929257))):
        with BuildLine():
            ThreePointArc((-7.6476298198, -36.2472551322), (-7.5011832104, -35.8937017416), (-7.1476298198, -35.7472551322))
            Line((-7.1476298198, -35.7472551322), (-7.6476298198, -35.7472551322))
            Line((-7.6476298198, -35.7472551322), (-7.6476298198, -36.2472551322))
        make_face()
    revolve(axis=Axis((-47.3712001992, -7.6476298198, 8.5), (0, -1, 0)), revolution_arc=F6_T38_ANGLE, mode=Mode.SUBTRACT)

    # F6_s39 → F6_t40 (revolve, cut)
    with BuildSketch(Plane(origin=(-14.1807378936, 0, 23.634563156), x_dir=(0, 1, 0), z_dir=(-0.5144957554, 0, 0.8574929257))):
        with BuildLine():
            ThreePointArc((-7.6476298198, 36.2472551322), (-7.5011832104, 35.8937017416), (-7.1476298198, 35.7472551322))
            Line((-7.1476298198, 35.7472551322), (-7.6476298198, 35.7472551322))
            Line((-7.6476298198, 35.7472551322), (-7.6476298198, 36.2472551322))
        make_face()
    revolve(axis=Axis((-44.4050098202, -7.6476298198, 5.5), (0, -1, 0)), revolution_arc=F6_T40_ANGLE, mode=Mode.SUBTRACT)

    # F6_s41 → F6_t42 (revolve, cut)
    with BuildSketch(Plane(origin=(0, 6.971278674, 11.61879779), x_dir=(1, 0, 0), z_dir=(0, 0.5144957554, 0.8574929257))):
        with BuildLine():
            ThreePointArc((-23.0881050097, 12.8928051893), (-23.2345516191, 12.5392517987), (-23.5881050097, 12.3928051893))
            Line((-23.5881050097, 12.3928051893), (-23.0881050097, 12.3928051893))
            Line((-23.0881050097, 12.3928051893), (-23.0881050097, 12.8928051893))
        make_face()
    revolve(axis=Axis((-23.0881050097, 17.1692749907, 5.5), (-1, 0, 0)), revolution_arc=F6_T42_ANGLE, mode=Mode.SUBTRACT)

    # F6_s43 → F6_t44 (revolve, cut)
    with BuildSketch(Plane(origin=(0, 9.0799761273, 15.1332935454), x_dir=(1, 0, 0), z_dir=(0, -0.5144957554, -0.8574929257))):
        with BuildLine():
            ThreePointArc((-23.0881050097, -12.8928051893), (-23.2345516191, -12.5392517987), (-23.5881050097, -12.3928051893))
            Line((-23.5881050097, -12.3928051893), (-23.0881050097, -12.3928051893))
            Line((-23.0881050097, -12.3928051893), (-23.0881050097, -12.8928051893))
        make_face()
    revolve(axis=Axis((-23.0881050097, 20.1354653697, 8.5), (-1, 0, 0)), revolution_arc=F6_T44_ANGLE, mode=Mode.SUBTRACT)


solid = f1_7.part
